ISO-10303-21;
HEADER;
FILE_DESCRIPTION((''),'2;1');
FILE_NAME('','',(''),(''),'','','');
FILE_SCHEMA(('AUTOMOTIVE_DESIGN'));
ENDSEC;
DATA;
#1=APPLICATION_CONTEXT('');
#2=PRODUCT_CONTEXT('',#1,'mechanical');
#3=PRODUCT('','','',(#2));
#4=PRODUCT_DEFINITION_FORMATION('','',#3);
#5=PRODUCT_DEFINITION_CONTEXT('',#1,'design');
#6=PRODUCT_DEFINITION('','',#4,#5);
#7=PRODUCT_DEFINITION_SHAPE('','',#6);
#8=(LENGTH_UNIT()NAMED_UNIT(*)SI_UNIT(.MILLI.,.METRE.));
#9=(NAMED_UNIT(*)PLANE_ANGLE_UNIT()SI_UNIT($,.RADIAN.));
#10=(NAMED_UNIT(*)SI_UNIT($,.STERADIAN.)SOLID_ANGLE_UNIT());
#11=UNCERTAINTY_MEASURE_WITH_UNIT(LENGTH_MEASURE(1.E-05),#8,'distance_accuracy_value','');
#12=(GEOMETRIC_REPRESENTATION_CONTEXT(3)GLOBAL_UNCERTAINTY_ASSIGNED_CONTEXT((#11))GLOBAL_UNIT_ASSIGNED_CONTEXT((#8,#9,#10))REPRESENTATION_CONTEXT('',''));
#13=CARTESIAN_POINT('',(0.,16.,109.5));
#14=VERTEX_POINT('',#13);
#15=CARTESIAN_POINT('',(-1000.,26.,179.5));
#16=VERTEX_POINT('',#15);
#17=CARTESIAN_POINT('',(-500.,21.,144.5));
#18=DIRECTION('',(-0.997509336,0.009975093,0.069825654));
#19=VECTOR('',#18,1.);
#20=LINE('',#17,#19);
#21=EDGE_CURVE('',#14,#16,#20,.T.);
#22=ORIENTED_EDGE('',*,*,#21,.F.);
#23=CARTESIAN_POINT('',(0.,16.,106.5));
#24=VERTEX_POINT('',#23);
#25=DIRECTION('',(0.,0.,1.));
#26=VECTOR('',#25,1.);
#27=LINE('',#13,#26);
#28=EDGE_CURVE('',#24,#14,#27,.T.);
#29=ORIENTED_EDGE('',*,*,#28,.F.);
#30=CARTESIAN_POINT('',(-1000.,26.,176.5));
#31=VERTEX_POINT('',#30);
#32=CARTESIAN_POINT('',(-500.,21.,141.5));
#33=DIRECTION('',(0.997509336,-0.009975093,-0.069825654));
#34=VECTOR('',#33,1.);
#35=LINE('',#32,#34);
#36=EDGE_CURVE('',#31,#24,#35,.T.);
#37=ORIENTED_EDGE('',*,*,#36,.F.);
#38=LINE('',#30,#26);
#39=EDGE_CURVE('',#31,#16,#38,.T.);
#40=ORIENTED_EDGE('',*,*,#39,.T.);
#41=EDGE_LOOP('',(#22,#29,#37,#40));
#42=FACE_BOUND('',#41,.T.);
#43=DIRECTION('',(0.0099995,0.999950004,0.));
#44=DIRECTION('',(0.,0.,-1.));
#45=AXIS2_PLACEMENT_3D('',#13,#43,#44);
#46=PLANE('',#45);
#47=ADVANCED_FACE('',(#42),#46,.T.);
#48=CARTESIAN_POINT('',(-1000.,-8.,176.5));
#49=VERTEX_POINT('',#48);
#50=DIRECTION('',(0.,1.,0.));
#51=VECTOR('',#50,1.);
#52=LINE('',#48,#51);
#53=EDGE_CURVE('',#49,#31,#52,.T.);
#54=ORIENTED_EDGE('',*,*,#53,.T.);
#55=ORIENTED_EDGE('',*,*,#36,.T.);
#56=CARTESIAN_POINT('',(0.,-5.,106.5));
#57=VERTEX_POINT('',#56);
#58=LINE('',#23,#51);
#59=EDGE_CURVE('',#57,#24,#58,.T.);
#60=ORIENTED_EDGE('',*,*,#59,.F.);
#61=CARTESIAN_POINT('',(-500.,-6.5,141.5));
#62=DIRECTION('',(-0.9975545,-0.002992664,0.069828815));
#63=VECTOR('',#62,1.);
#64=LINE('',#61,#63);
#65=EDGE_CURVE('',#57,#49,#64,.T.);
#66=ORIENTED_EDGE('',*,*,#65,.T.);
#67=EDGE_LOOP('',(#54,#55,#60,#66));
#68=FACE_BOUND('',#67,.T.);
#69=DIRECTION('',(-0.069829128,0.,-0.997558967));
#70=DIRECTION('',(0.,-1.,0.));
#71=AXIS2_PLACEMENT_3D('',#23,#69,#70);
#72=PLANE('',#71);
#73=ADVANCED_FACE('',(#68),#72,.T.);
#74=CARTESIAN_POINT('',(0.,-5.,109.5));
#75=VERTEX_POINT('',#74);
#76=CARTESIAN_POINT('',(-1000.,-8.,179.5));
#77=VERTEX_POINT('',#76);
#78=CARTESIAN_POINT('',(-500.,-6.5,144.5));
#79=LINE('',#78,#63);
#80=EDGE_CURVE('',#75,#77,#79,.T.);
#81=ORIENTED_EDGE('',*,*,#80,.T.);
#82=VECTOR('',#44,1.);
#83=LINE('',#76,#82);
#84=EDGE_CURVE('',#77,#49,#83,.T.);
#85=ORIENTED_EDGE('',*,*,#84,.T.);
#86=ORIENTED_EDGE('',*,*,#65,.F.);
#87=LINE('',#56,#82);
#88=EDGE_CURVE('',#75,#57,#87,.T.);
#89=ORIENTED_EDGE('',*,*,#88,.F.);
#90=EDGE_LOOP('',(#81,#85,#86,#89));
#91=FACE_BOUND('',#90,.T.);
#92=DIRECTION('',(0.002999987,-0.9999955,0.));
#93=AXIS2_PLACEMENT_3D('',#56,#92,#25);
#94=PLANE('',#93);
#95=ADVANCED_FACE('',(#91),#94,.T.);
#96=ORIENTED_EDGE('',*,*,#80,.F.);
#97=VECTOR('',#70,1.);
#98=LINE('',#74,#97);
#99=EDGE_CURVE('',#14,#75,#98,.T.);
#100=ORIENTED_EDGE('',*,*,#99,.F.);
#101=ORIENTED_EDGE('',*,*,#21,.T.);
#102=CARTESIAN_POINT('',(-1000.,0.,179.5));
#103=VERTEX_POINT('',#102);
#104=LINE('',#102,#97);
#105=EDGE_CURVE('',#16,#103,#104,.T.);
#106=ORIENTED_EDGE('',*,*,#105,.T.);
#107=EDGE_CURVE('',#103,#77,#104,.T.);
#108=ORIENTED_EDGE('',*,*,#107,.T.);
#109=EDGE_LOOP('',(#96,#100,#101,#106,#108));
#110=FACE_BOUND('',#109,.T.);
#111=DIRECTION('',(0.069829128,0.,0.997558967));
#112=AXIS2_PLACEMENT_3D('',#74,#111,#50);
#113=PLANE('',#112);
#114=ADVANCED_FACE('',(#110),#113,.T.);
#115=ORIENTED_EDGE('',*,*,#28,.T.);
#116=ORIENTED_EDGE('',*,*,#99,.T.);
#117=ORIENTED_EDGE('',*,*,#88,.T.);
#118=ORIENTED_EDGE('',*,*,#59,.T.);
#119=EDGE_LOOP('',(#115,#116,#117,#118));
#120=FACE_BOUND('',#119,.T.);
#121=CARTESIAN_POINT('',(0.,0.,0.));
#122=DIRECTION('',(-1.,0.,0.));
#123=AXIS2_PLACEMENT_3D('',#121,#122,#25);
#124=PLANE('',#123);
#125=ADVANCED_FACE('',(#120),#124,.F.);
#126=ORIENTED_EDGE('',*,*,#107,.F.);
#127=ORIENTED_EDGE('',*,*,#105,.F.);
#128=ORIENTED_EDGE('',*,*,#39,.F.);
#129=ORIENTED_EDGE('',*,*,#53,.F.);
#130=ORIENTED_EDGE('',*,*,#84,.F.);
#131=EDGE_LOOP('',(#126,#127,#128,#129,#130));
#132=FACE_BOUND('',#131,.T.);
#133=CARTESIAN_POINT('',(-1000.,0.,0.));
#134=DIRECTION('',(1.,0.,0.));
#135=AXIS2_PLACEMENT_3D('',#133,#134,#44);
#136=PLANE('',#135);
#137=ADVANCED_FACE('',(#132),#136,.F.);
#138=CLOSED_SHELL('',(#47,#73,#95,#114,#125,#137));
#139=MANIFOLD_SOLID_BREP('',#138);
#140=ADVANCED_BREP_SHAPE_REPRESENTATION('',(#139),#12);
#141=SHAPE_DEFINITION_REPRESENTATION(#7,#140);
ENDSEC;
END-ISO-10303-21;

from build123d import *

# Parameters (mm, degrees)
SKETCH_1_W               = 4.193920874
SKETCH_1_H               = 122.960997171
SKETCH_1_W_2             = 3
SKETCH_1_H_2             = 125.815298494
SKETCH_1_H_3             = 240
SKETCH_1_H_4             = 235.575244244
CUT_EXTRUDE_2_DEPTH      = 30
CUT_EXTRUDE_4_DEPTH      = 1017.315034938
CUT_EXTRUDE_4_DEPTH_BACK = 1017.315034938
SKETCH_24_W              = 1156.773882232
SKETCH_24_H              = 274.681970243


with BuildPart() as part:
    # Эскиз20 → По сечениям1 section 0
    with BuildSketch(Plane(origin=(-1000, 0, 0), x_dir=(0, 0, -1), z_dir=(1, 0, 0))):
        with BuildLine():
            Line((170.5, 0), (170.5, 25.918739381))
            Line((170.5, 25.918739381), (173.5, 25.918739381))
            Line((173.5, 25.918739381), (173.5, -8.081260619))
            Line((173.5, -8.081260619), (170.5, -8.081260619))
            Line((170.5, -8.081260619), (170.5, 0))
        make_face()
    # Эскиз14 → По сечениям1 section 1
    with BuildSketch(Plane(origin=(0, 0, 0), x_dir=(0, 0, -1), z_dir=(1, 0, 0))):
        with BuildLine():
            Line((100.5, 0), (100.5, -5))
            Line((100.5, -5), (103.5, -5))
            Line((103.5, -5), (103.5, 16))
            Line((103.5, 16), (100.5, 16))
            Line((100.5, 16), (100.5, 0))
        make_face()
    loft()

    # Эскиз1 → Вырез-Вытянуть2 (cut)
    with BuildSketch(Plane(origin=(0, 0, 0), x_dir=(1, 0, 0), z_dir=(0, 1, 0))):
        with Locations((-999.096960437, 178.519501415)):
            Rectangle(SKETCH_1_W, SKETCH_1_H)
        with Locations((-1.5, 62.907649247)):
            Rectangle(SKETCH_1_W_2, SKETCH_1_H_2)
        with Locations((-795.5, 120)):
            Rectangle(SKETCH_1_W_2, SKETCH_1_H_3)
        with Locations((-592.5, 117.787622122)):
            Rectangle(SKETCH_1_W_2, SKETCH_1_H_4)
        with Locations((-389.5, 117.787622122)):
            Rectangle(SKETCH_1_W_2, SKETCH_1_H_4)
        with Locations((-186.5, 117.787622122)):
            Rectangle(SKETCH_1_W_2, SKETCH_1_H_4)
    extrude(amount=CUT_EXTRUDE_2_DEPTH, mode=Mode.SUBTRACT)

    # Эскиз24 → Вырез-Вытянуть4 (cut, two sides: drawn at the far end of the back side and taken through both)
    with BuildSketch(Plane(origin=(0, 0, 0), x_dir=(1, 0, 0), z_dir=(0, 1, 0)).offset(-CUT_EXTRUDE_4_DEPTH_BACK)):
        with Locations((-473.050070844, 146.669806752)):
            Rectangle(SKETCH_24_W, SKETCH_24_H)
    extrude(amount=CUT_EXTRUDE_4_DEPTH + CUT_EXTRUDE_4_DEPTH_BACK, mode=Mode.SUBTRACT)


with BuildPart() as body_2:
    # По сечениям2: read off the stored shape, not the designer's step
    # По сечениям2: loft between two sections, ruled curve by curve
    loft_2_from = [
        Edge.make_line((-1000, -8, 176.5), (-1000, 26, 176.5)),
        Edge.make_line((-1000, -8, 179.5), (-1000, -8, 176.5)),
        Edge.make_line((-1000, 26, 176.5), (-1000, 26, 179.5)),
        Edge.make_line((-1000, 26, 179.5), (-1000, -8, 179.5)),
    ]
    loft_2_to = [
        Edge.make_line((0, -5, 106.5), (0, 16, 106.5)),
        Edge.make_line((0, -5, 109.5), (0, -5, 106.5)),
        Edge.make_line((0, 16, 106.5), (0, 16, 109.5)),
        Edge.make_line((0, 16, 109.5), (0, -5, 109.5)),
    ]
    loft_2 = Solid(Shell([*[Face.make_surface_from_curves(loft_2_from[k], loft_2_to[k]) for k in range(4)], Face(Wire(loft_2_from)), Face(Wire(loft_2_to))]))
    add(loft_2)


solid = body_2.part
